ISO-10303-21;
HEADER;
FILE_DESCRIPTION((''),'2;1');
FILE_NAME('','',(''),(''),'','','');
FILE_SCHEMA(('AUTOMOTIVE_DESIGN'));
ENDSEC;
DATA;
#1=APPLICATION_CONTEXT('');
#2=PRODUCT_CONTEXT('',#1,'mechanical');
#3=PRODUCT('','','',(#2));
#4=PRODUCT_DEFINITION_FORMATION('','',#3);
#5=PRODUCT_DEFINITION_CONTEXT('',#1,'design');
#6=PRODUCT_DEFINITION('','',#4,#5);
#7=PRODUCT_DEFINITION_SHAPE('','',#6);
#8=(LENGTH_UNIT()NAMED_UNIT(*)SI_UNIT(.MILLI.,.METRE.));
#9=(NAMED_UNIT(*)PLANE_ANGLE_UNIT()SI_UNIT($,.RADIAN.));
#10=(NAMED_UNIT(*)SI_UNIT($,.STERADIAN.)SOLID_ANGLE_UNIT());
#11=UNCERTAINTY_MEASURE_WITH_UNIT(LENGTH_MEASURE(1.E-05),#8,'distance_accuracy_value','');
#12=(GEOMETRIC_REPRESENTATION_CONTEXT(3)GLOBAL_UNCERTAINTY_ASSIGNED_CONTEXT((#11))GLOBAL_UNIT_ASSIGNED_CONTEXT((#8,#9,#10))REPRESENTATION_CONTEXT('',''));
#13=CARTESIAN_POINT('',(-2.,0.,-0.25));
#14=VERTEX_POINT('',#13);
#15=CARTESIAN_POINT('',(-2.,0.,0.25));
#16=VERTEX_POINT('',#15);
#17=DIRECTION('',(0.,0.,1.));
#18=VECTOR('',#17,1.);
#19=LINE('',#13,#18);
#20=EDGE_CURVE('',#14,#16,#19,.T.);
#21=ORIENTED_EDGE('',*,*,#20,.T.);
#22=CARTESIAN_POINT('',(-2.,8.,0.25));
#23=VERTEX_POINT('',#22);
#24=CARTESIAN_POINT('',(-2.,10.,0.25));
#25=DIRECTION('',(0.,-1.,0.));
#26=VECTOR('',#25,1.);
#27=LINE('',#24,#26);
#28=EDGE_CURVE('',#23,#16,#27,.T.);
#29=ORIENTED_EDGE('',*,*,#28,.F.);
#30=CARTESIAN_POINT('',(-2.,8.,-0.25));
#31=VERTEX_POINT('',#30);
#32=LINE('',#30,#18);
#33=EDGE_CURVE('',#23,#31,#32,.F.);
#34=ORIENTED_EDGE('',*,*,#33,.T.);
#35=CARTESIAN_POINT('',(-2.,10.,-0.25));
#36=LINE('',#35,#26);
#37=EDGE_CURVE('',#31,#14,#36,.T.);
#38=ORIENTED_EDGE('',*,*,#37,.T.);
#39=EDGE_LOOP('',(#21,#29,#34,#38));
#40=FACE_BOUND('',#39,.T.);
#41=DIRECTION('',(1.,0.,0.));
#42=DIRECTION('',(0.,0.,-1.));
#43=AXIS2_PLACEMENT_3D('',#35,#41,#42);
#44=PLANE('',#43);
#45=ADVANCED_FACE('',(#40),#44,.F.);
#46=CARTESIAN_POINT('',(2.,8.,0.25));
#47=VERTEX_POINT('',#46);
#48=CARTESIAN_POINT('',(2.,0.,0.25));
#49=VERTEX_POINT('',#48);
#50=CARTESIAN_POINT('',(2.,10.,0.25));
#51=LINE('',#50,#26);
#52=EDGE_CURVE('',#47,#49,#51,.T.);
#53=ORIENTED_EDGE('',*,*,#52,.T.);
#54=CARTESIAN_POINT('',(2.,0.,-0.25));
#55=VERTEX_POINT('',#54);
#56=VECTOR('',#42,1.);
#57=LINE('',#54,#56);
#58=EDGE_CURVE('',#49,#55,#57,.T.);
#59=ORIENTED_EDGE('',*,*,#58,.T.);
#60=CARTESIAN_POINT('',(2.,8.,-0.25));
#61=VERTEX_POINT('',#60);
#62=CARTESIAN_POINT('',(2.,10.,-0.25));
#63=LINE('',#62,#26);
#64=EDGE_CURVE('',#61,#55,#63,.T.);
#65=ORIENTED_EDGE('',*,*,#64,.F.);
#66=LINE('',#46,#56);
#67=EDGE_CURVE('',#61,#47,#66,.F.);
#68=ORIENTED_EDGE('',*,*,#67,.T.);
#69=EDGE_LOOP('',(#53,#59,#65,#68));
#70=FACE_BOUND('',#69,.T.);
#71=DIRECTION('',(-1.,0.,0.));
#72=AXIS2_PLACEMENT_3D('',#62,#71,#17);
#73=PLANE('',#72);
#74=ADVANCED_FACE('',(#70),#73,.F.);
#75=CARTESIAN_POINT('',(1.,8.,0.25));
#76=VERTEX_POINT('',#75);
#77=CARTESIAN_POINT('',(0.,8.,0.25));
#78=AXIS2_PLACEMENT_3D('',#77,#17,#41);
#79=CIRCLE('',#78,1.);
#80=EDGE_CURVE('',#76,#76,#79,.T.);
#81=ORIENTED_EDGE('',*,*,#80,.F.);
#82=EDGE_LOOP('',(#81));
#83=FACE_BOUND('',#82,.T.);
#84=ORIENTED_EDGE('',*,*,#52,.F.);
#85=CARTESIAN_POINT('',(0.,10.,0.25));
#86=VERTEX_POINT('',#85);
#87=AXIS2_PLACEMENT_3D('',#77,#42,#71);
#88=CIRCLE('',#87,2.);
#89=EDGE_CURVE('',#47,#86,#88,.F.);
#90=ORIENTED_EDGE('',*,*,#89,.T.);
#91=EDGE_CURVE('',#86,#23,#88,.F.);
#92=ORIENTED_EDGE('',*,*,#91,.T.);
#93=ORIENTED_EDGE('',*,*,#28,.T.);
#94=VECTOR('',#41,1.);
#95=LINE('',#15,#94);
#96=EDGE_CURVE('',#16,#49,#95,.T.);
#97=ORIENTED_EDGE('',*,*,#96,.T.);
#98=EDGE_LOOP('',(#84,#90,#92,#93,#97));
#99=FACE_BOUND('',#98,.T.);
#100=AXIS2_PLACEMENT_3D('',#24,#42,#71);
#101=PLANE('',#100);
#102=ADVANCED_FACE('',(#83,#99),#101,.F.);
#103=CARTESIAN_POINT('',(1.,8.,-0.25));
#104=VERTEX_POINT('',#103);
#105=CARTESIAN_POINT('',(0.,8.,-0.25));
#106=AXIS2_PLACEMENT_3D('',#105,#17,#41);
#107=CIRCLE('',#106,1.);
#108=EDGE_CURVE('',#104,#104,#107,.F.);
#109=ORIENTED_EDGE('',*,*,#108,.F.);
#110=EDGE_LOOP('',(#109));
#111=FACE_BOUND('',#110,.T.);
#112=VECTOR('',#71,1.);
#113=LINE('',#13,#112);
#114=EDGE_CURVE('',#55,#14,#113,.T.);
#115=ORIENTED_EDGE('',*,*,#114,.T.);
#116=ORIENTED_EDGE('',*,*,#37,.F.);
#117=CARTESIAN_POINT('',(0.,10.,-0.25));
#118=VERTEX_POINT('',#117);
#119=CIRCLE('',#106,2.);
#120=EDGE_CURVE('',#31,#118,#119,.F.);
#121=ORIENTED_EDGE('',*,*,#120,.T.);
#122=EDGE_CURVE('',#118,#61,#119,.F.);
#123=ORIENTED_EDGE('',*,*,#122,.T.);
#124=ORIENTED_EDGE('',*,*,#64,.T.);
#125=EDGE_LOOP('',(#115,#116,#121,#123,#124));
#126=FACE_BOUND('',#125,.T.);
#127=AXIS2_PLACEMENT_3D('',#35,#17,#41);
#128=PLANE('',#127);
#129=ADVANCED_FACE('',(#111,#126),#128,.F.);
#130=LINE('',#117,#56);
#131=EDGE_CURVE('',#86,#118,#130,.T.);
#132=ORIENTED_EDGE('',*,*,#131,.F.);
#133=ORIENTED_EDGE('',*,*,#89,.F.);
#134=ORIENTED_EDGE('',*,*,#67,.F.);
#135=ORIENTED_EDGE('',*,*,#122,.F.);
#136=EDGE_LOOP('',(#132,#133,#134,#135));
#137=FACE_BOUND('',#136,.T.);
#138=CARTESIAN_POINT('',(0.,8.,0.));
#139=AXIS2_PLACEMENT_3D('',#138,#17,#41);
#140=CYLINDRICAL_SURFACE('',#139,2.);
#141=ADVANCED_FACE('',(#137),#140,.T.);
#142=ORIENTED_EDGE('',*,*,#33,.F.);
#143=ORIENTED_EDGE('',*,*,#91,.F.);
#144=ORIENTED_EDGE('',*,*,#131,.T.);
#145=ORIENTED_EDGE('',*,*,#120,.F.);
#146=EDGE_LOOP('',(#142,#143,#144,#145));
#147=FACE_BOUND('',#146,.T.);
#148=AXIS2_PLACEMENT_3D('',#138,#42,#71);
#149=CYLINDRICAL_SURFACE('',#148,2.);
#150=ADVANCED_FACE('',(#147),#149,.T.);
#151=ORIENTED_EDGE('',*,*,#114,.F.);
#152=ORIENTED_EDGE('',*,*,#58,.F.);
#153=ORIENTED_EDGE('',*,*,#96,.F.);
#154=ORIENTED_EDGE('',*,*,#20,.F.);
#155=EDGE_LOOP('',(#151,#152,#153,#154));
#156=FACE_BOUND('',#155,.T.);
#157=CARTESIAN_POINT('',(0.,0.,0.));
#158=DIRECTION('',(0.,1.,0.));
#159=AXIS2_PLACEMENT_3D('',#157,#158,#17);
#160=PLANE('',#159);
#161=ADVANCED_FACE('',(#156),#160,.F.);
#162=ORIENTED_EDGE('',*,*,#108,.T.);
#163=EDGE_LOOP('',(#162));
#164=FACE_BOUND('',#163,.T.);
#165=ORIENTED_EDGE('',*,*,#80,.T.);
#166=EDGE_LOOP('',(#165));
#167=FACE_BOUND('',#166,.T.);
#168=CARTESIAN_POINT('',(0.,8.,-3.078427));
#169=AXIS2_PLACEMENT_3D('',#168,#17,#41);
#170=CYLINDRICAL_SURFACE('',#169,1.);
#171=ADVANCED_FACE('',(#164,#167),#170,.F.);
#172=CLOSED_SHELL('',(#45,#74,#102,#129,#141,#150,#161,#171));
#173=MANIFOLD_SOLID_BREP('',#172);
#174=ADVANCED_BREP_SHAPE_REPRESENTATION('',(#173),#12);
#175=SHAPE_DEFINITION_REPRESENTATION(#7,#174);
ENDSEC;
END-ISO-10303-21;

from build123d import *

# Parameters (mm, degrees)
SKETCH1_W           = 4
SKETCH1_H           = 0.5
BOSS_EXTRUDE1_DEPTH = 10
FILLET1_R           = 2
SKETCH2_R           = 1
CUT_EXTRUDE1_DEPTH  = 0.5


with BuildPart() as part:
    # Sketch1 → Boss-Extrude1 (new body)
    with BuildSketch(Plane(origin=(0, 0, 0), x_dir=(1, 0, 0), z_dir=(0, 1, 0))):
        Rectangle(SKETCH1_W, SKETCH1_H)
    extrude(amount=BOSS_EXTRUDE1_DEPTH)

    # Fillet1
    fillet1_edges = [part.edges().sort_by_distance(p)[0] for p in [
        (-2, 10, 0),
        (2, 10, 0),
    ]]
    fillet(fillet1_edges, radius=FILLET1_R - 0.0001)  # a hair under: the kernel refuses the full size

    # Sketch2 → Cut-Extrude1 (cut)
    with BuildSketch(Plane.XY.offset(0.25)):
        with Locations((0, 8)):
            Circle(SKETCH2_R)
    extrude(amount=-CUT_EXTRUDE1_DEPTH, mode=Mode.SUBTRACT)


solid = part.part
